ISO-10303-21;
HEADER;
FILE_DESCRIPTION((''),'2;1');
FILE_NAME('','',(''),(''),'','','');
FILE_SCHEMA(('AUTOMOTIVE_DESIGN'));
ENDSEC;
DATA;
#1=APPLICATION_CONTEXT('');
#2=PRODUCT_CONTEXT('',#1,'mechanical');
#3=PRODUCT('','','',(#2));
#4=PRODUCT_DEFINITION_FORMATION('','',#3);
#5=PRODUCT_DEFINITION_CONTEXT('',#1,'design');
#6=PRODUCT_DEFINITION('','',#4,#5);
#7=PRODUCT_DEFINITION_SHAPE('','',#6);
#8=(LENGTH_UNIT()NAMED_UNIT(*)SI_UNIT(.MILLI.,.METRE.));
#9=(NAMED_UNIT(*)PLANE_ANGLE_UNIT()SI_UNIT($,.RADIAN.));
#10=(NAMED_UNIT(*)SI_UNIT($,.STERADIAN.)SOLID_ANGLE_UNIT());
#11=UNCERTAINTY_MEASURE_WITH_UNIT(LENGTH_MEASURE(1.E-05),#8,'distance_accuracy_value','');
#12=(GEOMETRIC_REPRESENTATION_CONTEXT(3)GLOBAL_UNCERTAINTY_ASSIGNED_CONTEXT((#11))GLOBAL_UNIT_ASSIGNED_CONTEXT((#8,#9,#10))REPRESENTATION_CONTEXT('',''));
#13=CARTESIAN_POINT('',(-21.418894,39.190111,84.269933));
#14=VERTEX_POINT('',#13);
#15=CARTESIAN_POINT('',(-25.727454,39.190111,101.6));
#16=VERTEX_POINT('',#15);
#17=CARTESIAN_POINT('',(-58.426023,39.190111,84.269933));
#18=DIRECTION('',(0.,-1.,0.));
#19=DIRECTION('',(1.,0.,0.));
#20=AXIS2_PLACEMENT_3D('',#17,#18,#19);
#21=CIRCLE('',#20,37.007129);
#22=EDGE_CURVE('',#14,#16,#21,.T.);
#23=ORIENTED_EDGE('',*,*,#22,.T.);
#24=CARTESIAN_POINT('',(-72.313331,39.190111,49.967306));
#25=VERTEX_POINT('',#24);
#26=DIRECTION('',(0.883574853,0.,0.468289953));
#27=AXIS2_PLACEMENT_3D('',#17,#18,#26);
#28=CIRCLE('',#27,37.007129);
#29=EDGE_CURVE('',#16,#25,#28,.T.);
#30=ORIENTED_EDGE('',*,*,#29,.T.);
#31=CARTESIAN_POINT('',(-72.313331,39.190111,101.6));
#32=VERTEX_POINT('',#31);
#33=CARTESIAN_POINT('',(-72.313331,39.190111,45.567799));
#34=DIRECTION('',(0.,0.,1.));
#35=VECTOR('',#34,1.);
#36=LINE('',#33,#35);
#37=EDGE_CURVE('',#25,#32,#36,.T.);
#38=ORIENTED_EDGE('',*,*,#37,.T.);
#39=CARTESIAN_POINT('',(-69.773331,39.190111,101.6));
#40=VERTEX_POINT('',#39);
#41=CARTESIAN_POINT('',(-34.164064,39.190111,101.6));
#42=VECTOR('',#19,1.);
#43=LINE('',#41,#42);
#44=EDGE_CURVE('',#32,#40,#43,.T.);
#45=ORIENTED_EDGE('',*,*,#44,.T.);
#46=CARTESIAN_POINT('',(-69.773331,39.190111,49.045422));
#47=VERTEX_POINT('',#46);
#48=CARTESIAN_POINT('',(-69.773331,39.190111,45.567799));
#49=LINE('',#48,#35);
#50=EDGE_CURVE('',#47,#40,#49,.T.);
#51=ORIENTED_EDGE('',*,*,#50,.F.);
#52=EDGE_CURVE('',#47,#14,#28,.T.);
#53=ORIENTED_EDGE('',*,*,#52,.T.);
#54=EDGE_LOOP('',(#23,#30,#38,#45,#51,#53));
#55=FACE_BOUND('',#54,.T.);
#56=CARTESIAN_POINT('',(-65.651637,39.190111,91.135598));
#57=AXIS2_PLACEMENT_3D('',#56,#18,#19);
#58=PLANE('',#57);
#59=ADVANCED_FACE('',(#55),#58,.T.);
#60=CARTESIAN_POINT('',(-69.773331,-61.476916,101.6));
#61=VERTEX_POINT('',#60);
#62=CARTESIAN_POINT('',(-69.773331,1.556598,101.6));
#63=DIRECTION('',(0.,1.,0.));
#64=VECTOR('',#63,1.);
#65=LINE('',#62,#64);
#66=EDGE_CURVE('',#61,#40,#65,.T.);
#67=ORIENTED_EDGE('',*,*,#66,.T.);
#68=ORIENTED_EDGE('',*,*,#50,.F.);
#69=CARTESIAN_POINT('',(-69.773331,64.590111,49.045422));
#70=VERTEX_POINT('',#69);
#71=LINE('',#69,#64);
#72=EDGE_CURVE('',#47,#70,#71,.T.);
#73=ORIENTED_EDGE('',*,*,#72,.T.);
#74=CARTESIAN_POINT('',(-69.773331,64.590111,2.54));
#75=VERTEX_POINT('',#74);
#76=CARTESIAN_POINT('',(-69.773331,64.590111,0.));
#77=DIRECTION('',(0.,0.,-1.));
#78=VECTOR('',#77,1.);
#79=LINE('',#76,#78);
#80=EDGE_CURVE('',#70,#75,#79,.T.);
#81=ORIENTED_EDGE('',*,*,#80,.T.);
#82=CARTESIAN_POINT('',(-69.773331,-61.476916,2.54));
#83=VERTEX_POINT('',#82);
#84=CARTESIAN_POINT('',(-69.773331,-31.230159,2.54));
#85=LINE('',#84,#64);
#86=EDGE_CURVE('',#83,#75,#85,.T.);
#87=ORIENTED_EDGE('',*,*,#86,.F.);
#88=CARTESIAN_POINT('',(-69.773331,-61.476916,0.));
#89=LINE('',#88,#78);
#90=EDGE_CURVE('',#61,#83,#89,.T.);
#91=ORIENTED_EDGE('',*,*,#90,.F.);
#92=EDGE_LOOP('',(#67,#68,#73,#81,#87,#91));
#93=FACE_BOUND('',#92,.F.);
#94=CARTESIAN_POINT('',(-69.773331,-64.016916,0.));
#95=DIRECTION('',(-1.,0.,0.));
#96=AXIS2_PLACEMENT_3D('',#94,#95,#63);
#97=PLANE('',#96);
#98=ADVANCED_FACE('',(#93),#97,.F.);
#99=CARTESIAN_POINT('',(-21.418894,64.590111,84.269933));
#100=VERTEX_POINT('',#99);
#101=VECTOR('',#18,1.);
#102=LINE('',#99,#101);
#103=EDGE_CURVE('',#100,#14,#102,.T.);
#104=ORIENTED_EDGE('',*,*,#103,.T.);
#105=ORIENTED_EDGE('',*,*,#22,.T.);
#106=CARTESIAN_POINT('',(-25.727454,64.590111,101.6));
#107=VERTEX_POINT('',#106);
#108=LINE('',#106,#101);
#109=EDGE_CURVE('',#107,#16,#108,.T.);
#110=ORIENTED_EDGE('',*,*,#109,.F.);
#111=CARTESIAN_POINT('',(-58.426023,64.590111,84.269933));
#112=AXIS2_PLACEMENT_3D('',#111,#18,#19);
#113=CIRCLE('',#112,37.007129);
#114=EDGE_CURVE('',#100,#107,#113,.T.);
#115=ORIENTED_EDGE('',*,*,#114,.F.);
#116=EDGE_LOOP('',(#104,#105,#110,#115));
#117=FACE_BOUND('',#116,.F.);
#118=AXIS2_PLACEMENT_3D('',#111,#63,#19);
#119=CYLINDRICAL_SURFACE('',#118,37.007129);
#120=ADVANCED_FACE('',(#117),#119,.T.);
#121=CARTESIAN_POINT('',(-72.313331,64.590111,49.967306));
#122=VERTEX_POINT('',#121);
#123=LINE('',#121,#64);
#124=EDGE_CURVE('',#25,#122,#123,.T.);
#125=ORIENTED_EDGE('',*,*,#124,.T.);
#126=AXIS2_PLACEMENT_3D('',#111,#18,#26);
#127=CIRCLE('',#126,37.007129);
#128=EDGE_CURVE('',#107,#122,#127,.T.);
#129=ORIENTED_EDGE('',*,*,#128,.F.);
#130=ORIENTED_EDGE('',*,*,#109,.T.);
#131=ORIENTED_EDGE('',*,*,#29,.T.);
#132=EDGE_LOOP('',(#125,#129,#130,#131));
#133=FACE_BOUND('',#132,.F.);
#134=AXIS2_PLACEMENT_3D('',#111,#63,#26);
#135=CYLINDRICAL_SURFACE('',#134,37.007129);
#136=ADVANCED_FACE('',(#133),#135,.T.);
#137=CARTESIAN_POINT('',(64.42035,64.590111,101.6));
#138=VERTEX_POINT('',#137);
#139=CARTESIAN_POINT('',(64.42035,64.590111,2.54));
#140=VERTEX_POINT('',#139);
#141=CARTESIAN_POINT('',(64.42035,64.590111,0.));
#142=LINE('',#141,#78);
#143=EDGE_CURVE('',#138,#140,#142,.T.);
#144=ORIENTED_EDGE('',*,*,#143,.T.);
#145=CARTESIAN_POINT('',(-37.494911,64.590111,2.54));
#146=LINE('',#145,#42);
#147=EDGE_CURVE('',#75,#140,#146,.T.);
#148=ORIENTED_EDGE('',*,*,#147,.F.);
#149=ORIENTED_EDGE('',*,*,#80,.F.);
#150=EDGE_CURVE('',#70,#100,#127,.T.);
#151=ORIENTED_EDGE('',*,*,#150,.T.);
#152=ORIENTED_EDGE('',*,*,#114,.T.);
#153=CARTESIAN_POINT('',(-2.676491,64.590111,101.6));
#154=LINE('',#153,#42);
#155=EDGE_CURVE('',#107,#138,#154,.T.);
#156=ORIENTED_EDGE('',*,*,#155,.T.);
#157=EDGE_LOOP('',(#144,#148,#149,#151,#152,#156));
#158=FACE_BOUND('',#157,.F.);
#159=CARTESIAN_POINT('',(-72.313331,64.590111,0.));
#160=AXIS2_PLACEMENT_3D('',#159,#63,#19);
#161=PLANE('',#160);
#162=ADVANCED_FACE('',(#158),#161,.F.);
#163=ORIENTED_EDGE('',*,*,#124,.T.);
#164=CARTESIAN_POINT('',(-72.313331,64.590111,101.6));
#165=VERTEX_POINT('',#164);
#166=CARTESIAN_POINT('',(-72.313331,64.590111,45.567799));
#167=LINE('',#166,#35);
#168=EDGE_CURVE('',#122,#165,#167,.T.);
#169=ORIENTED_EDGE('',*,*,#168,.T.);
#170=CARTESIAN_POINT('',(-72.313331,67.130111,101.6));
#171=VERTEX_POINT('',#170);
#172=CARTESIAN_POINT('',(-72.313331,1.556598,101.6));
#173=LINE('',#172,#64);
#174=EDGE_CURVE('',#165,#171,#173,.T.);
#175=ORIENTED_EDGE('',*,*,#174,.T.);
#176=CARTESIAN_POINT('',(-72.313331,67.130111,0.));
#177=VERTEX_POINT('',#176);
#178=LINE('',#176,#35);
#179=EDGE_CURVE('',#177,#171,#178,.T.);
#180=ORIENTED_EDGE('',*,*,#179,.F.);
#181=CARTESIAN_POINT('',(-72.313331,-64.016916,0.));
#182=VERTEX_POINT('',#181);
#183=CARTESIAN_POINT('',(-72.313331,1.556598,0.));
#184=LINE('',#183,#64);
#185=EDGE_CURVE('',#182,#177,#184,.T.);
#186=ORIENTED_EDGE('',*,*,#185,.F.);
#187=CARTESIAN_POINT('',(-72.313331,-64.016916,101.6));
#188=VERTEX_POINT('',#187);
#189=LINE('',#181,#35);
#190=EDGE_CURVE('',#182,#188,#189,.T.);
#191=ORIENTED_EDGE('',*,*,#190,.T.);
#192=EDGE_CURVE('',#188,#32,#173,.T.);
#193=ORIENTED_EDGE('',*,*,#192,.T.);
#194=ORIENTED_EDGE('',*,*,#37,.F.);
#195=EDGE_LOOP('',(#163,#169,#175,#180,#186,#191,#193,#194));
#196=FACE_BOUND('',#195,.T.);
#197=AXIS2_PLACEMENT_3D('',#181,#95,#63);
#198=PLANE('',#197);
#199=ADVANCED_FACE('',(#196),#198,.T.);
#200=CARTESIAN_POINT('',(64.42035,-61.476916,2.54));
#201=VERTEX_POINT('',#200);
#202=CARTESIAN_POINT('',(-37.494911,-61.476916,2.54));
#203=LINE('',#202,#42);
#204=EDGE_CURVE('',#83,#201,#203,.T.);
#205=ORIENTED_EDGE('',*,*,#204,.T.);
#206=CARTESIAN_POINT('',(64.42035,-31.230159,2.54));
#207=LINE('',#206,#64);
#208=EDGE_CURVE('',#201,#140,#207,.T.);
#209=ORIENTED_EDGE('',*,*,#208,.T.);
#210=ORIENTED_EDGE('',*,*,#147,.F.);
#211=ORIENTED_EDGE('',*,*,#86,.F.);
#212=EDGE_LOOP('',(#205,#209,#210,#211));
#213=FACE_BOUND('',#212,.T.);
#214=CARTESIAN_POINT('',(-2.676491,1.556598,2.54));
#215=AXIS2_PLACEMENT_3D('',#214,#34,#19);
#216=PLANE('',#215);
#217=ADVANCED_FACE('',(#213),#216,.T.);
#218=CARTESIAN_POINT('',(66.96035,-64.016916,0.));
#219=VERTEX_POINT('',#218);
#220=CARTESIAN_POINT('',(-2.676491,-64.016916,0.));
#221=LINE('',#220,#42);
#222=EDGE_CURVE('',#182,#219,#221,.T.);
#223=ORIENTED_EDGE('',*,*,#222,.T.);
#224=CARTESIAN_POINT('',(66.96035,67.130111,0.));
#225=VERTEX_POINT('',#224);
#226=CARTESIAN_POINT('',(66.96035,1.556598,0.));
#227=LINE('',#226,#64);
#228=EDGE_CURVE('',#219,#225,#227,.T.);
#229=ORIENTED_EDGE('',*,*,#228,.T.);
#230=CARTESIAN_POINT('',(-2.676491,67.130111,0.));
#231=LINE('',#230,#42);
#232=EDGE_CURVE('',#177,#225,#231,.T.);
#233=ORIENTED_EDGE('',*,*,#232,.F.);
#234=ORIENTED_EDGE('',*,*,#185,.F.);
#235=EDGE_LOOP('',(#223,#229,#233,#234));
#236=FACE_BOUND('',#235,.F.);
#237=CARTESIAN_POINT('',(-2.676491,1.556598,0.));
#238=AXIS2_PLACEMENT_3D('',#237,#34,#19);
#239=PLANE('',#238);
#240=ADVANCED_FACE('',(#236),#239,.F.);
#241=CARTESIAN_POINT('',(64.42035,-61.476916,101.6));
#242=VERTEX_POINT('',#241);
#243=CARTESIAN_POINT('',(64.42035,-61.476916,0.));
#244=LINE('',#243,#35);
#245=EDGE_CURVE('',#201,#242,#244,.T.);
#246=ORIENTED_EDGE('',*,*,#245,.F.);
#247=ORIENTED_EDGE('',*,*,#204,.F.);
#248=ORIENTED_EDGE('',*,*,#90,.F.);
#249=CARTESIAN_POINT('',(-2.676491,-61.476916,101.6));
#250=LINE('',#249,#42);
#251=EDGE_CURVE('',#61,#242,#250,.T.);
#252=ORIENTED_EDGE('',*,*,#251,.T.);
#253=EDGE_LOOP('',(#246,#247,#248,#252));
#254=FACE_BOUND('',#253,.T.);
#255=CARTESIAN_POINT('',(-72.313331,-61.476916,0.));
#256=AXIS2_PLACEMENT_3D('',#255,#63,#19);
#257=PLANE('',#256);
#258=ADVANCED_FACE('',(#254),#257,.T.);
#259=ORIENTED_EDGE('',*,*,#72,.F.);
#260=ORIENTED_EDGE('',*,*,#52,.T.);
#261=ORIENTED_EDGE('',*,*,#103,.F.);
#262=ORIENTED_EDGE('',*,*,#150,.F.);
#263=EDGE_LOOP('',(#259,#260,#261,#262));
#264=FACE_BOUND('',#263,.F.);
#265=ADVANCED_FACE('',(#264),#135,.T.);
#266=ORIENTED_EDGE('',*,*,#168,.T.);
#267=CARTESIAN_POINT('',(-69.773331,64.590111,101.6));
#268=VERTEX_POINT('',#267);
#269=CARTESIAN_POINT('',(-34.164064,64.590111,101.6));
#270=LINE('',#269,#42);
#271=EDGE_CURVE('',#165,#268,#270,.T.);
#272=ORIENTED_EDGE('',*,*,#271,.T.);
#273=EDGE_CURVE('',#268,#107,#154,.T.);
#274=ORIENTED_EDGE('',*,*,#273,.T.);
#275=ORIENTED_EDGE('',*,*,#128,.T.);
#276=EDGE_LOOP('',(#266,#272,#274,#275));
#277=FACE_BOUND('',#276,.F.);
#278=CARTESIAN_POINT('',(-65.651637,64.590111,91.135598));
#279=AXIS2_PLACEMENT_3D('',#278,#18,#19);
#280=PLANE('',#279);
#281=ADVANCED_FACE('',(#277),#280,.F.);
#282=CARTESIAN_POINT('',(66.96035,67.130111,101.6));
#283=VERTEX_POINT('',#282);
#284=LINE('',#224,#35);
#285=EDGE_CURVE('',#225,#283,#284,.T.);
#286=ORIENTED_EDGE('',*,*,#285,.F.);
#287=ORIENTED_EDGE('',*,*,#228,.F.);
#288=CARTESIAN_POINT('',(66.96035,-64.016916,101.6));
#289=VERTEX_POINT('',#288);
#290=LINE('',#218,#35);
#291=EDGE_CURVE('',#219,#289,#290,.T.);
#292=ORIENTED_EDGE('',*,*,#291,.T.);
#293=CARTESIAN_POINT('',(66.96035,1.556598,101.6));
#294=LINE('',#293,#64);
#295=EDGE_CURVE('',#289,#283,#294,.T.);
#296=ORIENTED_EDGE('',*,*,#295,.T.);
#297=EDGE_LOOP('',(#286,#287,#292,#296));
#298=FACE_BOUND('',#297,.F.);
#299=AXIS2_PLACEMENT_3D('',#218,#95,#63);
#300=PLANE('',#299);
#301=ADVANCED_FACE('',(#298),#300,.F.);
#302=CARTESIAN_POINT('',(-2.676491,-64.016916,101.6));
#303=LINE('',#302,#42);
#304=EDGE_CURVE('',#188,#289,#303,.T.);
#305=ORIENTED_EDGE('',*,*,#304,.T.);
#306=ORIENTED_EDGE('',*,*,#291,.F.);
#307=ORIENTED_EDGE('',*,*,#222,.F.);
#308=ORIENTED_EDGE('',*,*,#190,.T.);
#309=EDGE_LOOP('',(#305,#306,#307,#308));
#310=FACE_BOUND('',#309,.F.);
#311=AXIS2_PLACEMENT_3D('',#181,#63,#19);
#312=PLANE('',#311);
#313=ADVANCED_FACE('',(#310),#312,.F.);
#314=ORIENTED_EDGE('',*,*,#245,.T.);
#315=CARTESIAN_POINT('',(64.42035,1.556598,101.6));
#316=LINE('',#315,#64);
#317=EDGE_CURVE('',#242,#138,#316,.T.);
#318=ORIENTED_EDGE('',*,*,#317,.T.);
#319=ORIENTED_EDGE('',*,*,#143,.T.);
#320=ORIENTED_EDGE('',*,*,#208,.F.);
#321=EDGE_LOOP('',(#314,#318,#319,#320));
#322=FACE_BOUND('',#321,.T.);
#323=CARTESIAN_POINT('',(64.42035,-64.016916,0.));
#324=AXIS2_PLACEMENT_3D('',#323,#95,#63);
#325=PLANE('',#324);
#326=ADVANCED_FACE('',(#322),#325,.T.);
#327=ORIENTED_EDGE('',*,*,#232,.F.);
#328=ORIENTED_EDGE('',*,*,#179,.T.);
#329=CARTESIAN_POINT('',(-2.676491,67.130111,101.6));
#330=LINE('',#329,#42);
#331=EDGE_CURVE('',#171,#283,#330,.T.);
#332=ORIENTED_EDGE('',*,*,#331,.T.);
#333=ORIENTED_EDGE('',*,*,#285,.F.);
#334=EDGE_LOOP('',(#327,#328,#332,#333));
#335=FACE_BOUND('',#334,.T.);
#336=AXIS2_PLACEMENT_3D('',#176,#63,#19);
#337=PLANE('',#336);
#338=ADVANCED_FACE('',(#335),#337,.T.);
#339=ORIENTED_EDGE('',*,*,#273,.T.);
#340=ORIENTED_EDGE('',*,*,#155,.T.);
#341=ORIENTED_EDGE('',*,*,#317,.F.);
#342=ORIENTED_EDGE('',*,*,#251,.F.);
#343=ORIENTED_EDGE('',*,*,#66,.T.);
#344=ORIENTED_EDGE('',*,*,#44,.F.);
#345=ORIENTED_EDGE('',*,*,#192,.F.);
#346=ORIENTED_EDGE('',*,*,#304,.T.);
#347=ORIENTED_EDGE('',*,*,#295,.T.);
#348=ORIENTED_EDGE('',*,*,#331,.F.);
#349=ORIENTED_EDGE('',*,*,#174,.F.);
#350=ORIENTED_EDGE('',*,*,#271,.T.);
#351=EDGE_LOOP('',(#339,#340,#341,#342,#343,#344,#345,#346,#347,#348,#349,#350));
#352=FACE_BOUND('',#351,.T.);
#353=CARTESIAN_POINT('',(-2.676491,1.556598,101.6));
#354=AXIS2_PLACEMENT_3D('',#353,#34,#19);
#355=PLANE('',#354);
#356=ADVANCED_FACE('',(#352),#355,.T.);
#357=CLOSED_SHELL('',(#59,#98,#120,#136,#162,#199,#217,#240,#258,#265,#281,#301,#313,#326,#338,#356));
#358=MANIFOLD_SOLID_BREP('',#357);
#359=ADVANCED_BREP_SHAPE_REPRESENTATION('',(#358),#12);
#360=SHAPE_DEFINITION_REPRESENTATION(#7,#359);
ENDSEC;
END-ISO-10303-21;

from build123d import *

# Parameters (mm, degrees)
F0_W     = 139.2736807466
F0_H     = 131.1470270157
F1_DEPTH = 101.6
F2_T     = -2.54
F4_DEPTH = 25.4


with BuildPart() as f1:
    # F0 (on Top) → F1 (new body)
    with BuildSketch(Plane.XY):
        with Locations((-2.6764906943, 1.5565976501)):
            Rectangle(F0_W, F0_H)
    extrude(amount=F1_DEPTH)

    # F2
    f2_openings = [f1.faces().sort_by_distance(p)[0] for p in [
        (-2.676491, 1.556598, 101.6),
    ]]
    offset(amount=F2_T, openings=f2_openings)

    # F3 (on face) → F4 (join)
    with BuildSketch(Plane.XZ.offset(-64.5901111579)):
        with BuildLine():
            Line((-69.7733310676, 101.6), (-25.7274541641, 101.6))
            ThreePointArc((-25.7274541641, 101.6), (-86.7891143722, 108.0409788687), (-69.7733310676, 49.0454224709))
            Line((-69.7733310676, 49.0454224709), (-69.7733310676, 101.6))
        make_face()
        with BuildLine():
            ThreePointArc((-69.7733310676, 49.0454224709), (-36.6361593712, 54.3579049697), (-21.4188937376, 84.2699334025))
            ThreePointArc((-21.4188937376, 84.2699334025), (-22.5121831898, 93.1987477306), (-25.7274541641, 101.6))
            Line((-25.7274541641, 101.6), (-69.7733310676, 101.6))
            Line((-69.7733310676, 101.6), (-69.7733310676, 49.0454224709))
        make_face()
    extrude(amount=F4_DEPTH)


solid = f1.part
